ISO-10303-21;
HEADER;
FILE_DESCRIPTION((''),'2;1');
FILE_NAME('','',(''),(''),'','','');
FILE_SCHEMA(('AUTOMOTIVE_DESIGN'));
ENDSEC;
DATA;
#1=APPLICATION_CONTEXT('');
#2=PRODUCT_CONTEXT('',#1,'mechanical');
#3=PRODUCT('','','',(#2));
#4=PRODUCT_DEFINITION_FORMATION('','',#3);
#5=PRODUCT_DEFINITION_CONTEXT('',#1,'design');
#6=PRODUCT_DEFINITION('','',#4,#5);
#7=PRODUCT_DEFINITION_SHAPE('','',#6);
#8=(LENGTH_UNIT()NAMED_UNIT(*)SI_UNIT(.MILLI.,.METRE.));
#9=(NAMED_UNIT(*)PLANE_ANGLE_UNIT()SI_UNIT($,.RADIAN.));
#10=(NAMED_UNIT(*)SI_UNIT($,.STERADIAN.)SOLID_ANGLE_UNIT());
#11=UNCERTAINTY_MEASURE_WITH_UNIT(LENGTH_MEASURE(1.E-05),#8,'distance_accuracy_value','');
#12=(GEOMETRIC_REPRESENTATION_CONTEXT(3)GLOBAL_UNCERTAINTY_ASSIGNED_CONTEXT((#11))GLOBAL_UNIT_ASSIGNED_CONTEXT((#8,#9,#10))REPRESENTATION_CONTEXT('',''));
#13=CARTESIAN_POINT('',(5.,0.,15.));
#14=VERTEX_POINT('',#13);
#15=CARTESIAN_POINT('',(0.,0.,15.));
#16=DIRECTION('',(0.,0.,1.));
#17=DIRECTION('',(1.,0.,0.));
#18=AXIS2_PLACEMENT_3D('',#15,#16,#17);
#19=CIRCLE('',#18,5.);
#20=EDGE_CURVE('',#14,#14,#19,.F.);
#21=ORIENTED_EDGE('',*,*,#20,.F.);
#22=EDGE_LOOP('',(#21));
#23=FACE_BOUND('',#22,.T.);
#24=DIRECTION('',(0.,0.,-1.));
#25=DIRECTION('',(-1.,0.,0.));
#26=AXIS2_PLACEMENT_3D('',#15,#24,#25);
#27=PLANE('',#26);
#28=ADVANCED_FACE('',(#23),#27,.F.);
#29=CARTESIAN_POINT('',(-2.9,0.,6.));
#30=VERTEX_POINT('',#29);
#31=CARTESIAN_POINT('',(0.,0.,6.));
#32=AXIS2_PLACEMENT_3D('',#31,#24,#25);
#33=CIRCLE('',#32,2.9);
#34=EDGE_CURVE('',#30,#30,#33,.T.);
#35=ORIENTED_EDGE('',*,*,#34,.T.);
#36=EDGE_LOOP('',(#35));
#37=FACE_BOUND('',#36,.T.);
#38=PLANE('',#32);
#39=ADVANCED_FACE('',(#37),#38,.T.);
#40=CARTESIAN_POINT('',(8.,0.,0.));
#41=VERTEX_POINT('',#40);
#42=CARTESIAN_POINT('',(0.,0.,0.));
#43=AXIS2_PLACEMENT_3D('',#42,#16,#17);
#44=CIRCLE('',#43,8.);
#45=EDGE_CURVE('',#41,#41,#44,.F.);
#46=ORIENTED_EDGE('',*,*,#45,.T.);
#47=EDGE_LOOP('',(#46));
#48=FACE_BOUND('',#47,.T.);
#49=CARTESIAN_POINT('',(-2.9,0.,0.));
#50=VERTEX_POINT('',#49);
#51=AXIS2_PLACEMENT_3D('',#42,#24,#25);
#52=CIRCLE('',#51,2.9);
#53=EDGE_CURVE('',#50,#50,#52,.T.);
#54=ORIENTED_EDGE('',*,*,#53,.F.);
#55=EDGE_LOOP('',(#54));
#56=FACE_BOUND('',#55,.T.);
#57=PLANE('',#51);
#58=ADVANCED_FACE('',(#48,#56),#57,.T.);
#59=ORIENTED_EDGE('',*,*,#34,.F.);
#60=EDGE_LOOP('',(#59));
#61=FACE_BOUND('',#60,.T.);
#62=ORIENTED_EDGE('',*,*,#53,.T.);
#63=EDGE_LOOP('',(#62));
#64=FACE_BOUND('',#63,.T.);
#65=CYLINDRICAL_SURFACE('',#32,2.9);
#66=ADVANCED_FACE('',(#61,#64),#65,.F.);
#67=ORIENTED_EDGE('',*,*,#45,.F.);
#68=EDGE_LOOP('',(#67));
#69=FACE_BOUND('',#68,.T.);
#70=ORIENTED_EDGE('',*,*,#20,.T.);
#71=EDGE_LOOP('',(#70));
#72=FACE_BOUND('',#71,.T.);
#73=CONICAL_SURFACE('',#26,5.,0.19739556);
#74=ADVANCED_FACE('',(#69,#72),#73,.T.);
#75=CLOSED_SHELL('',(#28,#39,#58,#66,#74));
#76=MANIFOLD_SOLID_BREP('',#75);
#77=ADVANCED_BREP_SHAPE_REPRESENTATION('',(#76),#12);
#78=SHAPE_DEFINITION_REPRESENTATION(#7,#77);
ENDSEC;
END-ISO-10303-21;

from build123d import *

# Parameters (mm, degrees)
SKETCH_7_R          = 2.9
CUT_EXTRUDE_1_DEPTH = 6


# Read off the part's stored shape, not the designer's step: 边界1
with BuildPart() as part:
    # 边界1 outline → 边界1 (revolve)
    with BuildSketch(Plane.XZ):
        Polygon((8, 0), (5, 15), (0, 15), (0, 0), align=None)
    revolve(axis=Axis((0, 0, 0), (0, 0, 1)))

    # 草图7 → 切除-拉伸1 (cut)
    with BuildSketch(Plane(origin=(0, 0, 0), x_dir=(-1, 0, 0), z_dir=(0, 0, -1))):
        Circle(SKETCH_7_R)
    extrude(amount=-CUT_EXTRUDE_1_DEPTH, mode=Mode.SUBTRACT)


solid = part.part
